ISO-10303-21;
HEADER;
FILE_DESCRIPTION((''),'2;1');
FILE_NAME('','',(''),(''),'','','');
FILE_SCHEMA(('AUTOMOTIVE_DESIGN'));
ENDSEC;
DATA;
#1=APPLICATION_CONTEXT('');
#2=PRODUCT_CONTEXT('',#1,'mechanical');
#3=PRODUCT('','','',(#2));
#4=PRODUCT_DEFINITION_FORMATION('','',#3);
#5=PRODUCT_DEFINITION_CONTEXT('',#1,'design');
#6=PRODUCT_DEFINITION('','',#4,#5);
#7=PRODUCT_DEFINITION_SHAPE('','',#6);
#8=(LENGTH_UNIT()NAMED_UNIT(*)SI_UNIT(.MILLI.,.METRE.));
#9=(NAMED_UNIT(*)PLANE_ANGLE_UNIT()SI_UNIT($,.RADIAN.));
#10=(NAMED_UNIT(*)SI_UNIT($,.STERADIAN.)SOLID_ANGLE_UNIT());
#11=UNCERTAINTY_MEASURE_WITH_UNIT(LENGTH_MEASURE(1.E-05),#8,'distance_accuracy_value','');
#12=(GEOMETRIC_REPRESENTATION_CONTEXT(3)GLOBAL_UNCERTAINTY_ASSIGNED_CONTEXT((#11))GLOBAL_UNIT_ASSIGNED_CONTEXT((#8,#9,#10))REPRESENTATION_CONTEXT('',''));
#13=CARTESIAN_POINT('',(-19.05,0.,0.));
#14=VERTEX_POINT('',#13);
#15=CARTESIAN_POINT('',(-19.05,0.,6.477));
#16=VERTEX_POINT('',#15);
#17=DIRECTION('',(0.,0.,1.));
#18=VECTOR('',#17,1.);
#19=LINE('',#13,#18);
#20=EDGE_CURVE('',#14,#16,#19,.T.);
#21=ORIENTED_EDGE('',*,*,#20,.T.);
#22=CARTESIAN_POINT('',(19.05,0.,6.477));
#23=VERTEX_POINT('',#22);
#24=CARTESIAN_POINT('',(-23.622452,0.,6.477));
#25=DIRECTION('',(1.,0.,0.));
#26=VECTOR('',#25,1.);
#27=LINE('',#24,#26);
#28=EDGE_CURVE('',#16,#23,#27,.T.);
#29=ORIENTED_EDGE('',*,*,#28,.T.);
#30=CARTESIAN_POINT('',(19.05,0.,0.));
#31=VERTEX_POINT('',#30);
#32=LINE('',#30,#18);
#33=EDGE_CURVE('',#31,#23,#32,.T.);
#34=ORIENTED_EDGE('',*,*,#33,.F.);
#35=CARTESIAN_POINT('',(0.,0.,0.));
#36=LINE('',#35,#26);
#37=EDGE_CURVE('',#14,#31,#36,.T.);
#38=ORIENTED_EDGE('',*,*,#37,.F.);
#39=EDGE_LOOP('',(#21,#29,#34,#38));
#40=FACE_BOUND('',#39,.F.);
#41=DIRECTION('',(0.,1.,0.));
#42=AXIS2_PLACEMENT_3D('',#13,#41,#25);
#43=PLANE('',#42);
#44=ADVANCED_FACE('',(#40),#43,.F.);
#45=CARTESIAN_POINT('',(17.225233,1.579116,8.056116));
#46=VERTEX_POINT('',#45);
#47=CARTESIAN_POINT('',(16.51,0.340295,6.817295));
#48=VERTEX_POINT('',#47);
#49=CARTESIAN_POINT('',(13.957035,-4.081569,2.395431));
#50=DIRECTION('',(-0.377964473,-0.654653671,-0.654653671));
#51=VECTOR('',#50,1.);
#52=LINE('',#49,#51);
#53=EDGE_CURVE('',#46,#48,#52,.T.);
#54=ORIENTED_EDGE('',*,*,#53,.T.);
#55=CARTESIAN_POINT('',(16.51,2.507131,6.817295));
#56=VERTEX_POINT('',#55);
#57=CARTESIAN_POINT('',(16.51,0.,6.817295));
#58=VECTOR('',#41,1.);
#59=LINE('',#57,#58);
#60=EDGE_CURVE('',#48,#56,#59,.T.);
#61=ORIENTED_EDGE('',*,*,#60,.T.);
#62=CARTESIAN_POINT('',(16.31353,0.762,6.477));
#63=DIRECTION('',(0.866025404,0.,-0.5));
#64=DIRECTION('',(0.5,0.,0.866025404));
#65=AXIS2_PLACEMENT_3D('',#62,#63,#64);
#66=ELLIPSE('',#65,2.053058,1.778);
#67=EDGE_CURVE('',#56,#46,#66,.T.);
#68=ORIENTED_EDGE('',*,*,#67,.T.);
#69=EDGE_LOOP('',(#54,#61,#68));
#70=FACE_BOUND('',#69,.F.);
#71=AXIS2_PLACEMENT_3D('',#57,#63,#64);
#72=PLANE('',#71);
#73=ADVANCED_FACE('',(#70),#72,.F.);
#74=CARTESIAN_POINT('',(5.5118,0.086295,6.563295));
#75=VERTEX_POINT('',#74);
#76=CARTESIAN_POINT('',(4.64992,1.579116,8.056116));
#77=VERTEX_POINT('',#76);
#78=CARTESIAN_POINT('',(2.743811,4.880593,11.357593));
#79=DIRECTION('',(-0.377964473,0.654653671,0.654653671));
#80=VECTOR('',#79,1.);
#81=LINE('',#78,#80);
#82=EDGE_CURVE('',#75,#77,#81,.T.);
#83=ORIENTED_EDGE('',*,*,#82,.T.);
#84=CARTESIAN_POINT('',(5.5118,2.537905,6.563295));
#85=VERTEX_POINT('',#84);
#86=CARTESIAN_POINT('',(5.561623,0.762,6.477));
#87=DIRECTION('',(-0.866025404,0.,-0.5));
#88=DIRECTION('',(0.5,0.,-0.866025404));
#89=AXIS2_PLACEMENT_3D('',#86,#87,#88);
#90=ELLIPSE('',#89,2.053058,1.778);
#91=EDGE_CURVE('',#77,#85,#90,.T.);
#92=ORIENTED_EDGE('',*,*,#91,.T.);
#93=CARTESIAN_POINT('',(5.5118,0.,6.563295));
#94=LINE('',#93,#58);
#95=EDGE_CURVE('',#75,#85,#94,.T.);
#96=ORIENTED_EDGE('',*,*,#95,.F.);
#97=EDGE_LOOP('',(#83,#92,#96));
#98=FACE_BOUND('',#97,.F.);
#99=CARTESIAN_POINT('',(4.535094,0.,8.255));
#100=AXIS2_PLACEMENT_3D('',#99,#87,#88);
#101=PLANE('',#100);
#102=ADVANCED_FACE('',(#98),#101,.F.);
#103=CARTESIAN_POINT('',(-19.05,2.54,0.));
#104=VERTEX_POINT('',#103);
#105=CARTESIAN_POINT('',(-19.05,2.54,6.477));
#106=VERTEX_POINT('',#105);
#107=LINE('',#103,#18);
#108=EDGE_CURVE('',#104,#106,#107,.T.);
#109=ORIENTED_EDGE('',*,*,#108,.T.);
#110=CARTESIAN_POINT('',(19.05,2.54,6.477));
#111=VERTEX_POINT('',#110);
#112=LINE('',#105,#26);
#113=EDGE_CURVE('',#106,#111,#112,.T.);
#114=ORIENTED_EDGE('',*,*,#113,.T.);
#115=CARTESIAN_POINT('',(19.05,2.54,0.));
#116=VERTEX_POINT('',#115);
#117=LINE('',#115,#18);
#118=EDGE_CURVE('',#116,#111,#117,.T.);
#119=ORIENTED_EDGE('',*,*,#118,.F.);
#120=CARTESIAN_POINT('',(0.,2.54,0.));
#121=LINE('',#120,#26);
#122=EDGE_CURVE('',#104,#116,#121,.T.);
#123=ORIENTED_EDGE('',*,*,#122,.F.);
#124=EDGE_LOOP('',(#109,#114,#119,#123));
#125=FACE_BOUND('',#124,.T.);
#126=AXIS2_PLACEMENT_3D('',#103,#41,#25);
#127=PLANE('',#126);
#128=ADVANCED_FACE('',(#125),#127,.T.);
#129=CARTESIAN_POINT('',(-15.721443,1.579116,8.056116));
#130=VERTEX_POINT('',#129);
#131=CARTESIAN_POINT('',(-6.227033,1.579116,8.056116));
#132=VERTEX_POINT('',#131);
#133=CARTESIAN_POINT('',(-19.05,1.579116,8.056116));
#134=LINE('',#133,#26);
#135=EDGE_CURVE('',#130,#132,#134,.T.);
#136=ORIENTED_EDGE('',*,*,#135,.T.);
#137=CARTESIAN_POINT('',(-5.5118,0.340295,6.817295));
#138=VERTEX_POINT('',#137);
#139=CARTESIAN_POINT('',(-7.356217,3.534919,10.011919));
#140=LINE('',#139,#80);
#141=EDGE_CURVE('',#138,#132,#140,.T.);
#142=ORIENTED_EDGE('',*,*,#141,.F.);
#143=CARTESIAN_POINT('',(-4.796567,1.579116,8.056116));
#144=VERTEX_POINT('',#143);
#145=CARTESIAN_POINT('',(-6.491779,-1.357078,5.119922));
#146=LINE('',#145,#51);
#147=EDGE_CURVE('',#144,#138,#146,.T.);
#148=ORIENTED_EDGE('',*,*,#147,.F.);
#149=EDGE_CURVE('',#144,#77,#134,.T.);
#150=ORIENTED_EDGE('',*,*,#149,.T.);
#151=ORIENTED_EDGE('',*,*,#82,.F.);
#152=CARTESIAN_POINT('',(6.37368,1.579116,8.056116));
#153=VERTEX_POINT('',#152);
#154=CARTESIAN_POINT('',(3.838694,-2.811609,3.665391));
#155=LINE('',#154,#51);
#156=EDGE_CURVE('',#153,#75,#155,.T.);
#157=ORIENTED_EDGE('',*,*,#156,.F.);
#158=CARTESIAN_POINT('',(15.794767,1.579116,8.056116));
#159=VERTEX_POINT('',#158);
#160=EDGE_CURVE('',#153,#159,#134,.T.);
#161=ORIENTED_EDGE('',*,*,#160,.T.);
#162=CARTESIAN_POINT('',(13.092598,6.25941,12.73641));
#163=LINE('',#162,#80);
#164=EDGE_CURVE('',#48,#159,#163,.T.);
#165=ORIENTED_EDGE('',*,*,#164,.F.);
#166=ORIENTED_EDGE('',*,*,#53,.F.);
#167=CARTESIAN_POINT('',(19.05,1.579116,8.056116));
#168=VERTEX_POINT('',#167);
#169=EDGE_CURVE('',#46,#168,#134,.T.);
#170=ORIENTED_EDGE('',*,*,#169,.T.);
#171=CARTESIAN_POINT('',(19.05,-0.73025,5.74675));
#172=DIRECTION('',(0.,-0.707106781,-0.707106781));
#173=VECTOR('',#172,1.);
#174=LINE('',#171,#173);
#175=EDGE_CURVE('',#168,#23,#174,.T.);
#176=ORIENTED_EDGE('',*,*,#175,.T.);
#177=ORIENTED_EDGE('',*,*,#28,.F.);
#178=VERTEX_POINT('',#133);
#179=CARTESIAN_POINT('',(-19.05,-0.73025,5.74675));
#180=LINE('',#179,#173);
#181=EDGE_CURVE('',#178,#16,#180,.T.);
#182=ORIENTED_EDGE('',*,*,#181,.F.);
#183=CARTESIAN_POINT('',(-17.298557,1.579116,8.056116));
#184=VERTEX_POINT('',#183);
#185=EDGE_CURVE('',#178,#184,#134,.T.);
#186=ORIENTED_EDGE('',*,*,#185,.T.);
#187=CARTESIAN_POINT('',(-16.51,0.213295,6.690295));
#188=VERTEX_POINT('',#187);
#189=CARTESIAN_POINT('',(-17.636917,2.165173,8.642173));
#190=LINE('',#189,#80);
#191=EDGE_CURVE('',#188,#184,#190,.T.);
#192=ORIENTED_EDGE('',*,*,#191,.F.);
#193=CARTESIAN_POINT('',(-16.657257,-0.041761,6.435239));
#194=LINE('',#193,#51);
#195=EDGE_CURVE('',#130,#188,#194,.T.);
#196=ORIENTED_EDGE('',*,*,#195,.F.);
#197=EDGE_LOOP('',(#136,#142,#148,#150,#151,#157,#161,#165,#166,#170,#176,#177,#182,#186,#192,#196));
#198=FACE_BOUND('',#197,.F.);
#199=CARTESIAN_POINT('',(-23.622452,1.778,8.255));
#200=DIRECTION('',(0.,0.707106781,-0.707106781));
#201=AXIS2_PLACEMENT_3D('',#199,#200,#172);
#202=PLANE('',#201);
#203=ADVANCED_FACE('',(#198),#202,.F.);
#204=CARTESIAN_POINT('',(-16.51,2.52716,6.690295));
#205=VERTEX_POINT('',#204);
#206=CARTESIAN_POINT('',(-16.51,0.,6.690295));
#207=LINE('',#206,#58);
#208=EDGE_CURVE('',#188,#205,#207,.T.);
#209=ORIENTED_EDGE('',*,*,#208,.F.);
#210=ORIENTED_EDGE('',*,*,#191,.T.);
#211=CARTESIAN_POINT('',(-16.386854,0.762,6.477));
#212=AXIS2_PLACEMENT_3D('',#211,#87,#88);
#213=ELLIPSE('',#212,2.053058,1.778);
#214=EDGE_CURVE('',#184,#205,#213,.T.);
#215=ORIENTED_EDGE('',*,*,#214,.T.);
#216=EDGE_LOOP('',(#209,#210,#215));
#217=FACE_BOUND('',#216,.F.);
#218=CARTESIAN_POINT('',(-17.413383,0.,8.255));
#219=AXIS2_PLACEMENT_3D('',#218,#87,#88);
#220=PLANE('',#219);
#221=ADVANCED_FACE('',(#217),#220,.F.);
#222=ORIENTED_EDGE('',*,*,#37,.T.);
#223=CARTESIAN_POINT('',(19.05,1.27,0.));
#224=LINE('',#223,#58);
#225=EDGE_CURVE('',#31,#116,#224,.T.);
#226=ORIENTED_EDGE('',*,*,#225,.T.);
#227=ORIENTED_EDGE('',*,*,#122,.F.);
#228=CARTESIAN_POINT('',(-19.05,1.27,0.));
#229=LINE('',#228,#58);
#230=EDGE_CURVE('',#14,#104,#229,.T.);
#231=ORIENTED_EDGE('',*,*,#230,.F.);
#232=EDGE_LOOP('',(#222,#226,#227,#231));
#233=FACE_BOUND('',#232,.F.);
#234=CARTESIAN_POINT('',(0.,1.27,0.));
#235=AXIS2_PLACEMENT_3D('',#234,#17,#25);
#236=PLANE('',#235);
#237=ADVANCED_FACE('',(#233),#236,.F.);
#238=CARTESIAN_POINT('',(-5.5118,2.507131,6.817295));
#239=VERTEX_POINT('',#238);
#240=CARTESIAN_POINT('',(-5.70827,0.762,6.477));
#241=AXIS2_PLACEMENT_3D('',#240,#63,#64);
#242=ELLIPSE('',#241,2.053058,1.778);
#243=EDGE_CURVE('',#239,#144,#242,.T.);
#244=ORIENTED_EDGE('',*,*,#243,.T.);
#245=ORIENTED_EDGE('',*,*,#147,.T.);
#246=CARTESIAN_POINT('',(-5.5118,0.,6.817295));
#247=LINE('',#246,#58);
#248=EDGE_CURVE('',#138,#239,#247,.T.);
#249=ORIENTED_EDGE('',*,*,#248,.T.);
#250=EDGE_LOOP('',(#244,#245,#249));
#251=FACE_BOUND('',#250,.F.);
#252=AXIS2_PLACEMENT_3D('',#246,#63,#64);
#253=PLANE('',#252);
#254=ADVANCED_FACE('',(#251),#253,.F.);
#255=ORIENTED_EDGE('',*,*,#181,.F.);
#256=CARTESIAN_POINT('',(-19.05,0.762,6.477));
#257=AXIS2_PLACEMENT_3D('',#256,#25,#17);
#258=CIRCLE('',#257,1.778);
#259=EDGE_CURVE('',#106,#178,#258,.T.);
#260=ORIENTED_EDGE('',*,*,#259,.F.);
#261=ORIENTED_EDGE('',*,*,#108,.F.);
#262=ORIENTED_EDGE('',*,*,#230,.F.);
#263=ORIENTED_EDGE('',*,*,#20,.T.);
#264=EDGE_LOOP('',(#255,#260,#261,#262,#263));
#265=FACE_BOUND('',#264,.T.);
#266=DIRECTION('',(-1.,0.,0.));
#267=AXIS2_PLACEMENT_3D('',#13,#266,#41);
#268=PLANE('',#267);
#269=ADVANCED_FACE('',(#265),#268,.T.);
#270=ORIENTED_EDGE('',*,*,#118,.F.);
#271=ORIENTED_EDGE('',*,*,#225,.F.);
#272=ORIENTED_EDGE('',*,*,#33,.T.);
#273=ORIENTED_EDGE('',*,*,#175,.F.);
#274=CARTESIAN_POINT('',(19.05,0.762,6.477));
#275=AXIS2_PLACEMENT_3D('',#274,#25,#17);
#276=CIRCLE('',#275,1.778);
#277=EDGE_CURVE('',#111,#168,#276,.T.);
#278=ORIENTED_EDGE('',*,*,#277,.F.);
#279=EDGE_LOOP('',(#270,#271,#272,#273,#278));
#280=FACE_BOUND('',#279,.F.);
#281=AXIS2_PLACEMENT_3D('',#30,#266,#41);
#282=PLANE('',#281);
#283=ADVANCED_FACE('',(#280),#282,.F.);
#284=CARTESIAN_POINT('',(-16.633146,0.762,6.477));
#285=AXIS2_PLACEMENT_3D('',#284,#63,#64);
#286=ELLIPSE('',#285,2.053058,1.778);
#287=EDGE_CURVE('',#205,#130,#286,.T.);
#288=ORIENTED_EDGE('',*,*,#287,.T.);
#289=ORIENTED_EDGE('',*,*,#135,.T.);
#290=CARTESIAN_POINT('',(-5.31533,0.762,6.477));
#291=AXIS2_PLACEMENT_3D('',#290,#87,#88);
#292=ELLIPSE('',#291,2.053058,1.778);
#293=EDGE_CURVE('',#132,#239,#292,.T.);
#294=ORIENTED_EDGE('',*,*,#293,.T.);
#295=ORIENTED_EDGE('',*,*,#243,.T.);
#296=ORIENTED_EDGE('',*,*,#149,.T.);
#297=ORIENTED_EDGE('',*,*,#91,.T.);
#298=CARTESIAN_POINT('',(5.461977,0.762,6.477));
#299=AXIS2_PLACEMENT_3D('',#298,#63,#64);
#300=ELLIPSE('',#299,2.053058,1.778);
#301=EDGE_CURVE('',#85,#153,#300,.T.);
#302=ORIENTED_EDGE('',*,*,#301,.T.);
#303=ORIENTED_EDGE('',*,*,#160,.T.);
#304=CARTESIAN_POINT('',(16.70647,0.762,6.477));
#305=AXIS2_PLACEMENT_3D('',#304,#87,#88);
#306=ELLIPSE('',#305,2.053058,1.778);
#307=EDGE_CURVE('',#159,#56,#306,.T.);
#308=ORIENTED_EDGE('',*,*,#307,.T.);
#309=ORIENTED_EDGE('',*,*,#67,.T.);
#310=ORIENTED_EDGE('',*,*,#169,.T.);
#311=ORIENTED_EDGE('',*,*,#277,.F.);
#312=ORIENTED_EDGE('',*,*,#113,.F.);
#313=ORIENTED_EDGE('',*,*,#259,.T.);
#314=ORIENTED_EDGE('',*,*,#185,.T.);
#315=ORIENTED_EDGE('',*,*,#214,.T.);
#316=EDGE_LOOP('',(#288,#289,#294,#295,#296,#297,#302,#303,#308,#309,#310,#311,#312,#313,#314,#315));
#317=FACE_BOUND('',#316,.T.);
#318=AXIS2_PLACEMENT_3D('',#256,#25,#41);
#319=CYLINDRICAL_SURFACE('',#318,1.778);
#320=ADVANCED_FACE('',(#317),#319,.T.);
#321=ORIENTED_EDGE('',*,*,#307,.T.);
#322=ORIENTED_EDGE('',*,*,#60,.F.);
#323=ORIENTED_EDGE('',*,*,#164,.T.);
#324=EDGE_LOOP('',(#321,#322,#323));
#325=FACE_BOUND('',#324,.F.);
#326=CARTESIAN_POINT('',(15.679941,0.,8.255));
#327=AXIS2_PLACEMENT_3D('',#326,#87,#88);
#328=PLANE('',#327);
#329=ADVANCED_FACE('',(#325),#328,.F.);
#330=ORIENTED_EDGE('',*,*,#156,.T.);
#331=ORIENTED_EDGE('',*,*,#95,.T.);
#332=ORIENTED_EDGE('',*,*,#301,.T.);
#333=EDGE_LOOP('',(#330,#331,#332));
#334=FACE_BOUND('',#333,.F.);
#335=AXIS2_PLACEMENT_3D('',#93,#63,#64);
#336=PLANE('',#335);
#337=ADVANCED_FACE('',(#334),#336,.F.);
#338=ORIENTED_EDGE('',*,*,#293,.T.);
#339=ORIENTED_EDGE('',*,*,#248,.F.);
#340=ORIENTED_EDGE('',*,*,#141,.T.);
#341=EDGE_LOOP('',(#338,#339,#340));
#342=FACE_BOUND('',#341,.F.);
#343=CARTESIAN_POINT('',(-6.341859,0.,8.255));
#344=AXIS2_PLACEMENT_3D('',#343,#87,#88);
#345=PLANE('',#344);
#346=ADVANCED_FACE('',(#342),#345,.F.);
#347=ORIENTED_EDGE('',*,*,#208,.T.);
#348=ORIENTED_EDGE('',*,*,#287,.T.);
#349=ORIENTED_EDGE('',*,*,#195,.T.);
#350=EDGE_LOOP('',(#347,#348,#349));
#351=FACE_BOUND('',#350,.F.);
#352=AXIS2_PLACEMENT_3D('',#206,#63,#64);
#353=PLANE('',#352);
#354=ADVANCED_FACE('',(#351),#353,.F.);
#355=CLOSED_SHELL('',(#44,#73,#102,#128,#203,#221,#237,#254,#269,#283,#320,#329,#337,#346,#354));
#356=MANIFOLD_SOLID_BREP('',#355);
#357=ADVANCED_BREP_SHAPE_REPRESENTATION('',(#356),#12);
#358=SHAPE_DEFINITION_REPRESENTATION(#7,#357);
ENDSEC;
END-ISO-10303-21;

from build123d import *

# Parameters (mm, degrees)
F0_W        = 38.1
F0_H        = 2.54
F1_DEPTH    = 8.255
F3_R        = 1.778
F4_T1_DEPTH = 47.2449047052
F5_DEPTH    = 25.4


# Not quite as in the source:
# - a fillet or chamfer that OpenCascade refuses, or shapes differently, is made with other operations: its cross-section is extruded or revolved along the edge and cut away or added


with BuildPart() as f1:
    # F0 (on Top) → F1 (new body)
    with BuildSketch(Plane.XY):
        with Locations((0, 1.27)):
            Rectangle(F0_W, F0_H)
    extrude(amount=F1_DEPTH)

    # F3
    f3_edges = [f1.edges().sort_by_distance(p)[0] for p in [
        (0, 2.54, 8.255),
    ]]
    fillet(f3_edges, radius=F3_R)

    # F4: chamfer of 1.778 on 1 edges, made by hand

    # F4_s2 → F4_t1 (cut)
    with BuildSketch(Plane.YZ.offset(-23.6224523526)):
        Polygon((1.778, 8.255), (0, 6.477), (0, 8.255), align=None)
    extrude(amount=F4_T1_DEPTH, mode=Mode.SUBTRACT)

    # F2 (on face) → F5 (cut)
    with BuildSketch(Plane.XZ):
        Polygon((-16.51, 6.6902954744), (-15.6066174209, 8.255), (-17.4133825791, 8.255), align=None)
        Polygon((-4.6817409051, 8.255), (-6.3418590949, 8.255), (-5.5118, 6.8172954744), align=None)
        Polygon((6.4885060633, 8.255), (4.5350939367, 8.255), (5.5118, 6.5632954744), align=None)
        Polygon((17.3400590949, 8.255), (15.6799409051, 8.255), (16.51, 6.8172954744), align=None)
    extrude(amount=-F5_DEPTH, mode=Mode.SUBTRACT)


solid = f1.part
